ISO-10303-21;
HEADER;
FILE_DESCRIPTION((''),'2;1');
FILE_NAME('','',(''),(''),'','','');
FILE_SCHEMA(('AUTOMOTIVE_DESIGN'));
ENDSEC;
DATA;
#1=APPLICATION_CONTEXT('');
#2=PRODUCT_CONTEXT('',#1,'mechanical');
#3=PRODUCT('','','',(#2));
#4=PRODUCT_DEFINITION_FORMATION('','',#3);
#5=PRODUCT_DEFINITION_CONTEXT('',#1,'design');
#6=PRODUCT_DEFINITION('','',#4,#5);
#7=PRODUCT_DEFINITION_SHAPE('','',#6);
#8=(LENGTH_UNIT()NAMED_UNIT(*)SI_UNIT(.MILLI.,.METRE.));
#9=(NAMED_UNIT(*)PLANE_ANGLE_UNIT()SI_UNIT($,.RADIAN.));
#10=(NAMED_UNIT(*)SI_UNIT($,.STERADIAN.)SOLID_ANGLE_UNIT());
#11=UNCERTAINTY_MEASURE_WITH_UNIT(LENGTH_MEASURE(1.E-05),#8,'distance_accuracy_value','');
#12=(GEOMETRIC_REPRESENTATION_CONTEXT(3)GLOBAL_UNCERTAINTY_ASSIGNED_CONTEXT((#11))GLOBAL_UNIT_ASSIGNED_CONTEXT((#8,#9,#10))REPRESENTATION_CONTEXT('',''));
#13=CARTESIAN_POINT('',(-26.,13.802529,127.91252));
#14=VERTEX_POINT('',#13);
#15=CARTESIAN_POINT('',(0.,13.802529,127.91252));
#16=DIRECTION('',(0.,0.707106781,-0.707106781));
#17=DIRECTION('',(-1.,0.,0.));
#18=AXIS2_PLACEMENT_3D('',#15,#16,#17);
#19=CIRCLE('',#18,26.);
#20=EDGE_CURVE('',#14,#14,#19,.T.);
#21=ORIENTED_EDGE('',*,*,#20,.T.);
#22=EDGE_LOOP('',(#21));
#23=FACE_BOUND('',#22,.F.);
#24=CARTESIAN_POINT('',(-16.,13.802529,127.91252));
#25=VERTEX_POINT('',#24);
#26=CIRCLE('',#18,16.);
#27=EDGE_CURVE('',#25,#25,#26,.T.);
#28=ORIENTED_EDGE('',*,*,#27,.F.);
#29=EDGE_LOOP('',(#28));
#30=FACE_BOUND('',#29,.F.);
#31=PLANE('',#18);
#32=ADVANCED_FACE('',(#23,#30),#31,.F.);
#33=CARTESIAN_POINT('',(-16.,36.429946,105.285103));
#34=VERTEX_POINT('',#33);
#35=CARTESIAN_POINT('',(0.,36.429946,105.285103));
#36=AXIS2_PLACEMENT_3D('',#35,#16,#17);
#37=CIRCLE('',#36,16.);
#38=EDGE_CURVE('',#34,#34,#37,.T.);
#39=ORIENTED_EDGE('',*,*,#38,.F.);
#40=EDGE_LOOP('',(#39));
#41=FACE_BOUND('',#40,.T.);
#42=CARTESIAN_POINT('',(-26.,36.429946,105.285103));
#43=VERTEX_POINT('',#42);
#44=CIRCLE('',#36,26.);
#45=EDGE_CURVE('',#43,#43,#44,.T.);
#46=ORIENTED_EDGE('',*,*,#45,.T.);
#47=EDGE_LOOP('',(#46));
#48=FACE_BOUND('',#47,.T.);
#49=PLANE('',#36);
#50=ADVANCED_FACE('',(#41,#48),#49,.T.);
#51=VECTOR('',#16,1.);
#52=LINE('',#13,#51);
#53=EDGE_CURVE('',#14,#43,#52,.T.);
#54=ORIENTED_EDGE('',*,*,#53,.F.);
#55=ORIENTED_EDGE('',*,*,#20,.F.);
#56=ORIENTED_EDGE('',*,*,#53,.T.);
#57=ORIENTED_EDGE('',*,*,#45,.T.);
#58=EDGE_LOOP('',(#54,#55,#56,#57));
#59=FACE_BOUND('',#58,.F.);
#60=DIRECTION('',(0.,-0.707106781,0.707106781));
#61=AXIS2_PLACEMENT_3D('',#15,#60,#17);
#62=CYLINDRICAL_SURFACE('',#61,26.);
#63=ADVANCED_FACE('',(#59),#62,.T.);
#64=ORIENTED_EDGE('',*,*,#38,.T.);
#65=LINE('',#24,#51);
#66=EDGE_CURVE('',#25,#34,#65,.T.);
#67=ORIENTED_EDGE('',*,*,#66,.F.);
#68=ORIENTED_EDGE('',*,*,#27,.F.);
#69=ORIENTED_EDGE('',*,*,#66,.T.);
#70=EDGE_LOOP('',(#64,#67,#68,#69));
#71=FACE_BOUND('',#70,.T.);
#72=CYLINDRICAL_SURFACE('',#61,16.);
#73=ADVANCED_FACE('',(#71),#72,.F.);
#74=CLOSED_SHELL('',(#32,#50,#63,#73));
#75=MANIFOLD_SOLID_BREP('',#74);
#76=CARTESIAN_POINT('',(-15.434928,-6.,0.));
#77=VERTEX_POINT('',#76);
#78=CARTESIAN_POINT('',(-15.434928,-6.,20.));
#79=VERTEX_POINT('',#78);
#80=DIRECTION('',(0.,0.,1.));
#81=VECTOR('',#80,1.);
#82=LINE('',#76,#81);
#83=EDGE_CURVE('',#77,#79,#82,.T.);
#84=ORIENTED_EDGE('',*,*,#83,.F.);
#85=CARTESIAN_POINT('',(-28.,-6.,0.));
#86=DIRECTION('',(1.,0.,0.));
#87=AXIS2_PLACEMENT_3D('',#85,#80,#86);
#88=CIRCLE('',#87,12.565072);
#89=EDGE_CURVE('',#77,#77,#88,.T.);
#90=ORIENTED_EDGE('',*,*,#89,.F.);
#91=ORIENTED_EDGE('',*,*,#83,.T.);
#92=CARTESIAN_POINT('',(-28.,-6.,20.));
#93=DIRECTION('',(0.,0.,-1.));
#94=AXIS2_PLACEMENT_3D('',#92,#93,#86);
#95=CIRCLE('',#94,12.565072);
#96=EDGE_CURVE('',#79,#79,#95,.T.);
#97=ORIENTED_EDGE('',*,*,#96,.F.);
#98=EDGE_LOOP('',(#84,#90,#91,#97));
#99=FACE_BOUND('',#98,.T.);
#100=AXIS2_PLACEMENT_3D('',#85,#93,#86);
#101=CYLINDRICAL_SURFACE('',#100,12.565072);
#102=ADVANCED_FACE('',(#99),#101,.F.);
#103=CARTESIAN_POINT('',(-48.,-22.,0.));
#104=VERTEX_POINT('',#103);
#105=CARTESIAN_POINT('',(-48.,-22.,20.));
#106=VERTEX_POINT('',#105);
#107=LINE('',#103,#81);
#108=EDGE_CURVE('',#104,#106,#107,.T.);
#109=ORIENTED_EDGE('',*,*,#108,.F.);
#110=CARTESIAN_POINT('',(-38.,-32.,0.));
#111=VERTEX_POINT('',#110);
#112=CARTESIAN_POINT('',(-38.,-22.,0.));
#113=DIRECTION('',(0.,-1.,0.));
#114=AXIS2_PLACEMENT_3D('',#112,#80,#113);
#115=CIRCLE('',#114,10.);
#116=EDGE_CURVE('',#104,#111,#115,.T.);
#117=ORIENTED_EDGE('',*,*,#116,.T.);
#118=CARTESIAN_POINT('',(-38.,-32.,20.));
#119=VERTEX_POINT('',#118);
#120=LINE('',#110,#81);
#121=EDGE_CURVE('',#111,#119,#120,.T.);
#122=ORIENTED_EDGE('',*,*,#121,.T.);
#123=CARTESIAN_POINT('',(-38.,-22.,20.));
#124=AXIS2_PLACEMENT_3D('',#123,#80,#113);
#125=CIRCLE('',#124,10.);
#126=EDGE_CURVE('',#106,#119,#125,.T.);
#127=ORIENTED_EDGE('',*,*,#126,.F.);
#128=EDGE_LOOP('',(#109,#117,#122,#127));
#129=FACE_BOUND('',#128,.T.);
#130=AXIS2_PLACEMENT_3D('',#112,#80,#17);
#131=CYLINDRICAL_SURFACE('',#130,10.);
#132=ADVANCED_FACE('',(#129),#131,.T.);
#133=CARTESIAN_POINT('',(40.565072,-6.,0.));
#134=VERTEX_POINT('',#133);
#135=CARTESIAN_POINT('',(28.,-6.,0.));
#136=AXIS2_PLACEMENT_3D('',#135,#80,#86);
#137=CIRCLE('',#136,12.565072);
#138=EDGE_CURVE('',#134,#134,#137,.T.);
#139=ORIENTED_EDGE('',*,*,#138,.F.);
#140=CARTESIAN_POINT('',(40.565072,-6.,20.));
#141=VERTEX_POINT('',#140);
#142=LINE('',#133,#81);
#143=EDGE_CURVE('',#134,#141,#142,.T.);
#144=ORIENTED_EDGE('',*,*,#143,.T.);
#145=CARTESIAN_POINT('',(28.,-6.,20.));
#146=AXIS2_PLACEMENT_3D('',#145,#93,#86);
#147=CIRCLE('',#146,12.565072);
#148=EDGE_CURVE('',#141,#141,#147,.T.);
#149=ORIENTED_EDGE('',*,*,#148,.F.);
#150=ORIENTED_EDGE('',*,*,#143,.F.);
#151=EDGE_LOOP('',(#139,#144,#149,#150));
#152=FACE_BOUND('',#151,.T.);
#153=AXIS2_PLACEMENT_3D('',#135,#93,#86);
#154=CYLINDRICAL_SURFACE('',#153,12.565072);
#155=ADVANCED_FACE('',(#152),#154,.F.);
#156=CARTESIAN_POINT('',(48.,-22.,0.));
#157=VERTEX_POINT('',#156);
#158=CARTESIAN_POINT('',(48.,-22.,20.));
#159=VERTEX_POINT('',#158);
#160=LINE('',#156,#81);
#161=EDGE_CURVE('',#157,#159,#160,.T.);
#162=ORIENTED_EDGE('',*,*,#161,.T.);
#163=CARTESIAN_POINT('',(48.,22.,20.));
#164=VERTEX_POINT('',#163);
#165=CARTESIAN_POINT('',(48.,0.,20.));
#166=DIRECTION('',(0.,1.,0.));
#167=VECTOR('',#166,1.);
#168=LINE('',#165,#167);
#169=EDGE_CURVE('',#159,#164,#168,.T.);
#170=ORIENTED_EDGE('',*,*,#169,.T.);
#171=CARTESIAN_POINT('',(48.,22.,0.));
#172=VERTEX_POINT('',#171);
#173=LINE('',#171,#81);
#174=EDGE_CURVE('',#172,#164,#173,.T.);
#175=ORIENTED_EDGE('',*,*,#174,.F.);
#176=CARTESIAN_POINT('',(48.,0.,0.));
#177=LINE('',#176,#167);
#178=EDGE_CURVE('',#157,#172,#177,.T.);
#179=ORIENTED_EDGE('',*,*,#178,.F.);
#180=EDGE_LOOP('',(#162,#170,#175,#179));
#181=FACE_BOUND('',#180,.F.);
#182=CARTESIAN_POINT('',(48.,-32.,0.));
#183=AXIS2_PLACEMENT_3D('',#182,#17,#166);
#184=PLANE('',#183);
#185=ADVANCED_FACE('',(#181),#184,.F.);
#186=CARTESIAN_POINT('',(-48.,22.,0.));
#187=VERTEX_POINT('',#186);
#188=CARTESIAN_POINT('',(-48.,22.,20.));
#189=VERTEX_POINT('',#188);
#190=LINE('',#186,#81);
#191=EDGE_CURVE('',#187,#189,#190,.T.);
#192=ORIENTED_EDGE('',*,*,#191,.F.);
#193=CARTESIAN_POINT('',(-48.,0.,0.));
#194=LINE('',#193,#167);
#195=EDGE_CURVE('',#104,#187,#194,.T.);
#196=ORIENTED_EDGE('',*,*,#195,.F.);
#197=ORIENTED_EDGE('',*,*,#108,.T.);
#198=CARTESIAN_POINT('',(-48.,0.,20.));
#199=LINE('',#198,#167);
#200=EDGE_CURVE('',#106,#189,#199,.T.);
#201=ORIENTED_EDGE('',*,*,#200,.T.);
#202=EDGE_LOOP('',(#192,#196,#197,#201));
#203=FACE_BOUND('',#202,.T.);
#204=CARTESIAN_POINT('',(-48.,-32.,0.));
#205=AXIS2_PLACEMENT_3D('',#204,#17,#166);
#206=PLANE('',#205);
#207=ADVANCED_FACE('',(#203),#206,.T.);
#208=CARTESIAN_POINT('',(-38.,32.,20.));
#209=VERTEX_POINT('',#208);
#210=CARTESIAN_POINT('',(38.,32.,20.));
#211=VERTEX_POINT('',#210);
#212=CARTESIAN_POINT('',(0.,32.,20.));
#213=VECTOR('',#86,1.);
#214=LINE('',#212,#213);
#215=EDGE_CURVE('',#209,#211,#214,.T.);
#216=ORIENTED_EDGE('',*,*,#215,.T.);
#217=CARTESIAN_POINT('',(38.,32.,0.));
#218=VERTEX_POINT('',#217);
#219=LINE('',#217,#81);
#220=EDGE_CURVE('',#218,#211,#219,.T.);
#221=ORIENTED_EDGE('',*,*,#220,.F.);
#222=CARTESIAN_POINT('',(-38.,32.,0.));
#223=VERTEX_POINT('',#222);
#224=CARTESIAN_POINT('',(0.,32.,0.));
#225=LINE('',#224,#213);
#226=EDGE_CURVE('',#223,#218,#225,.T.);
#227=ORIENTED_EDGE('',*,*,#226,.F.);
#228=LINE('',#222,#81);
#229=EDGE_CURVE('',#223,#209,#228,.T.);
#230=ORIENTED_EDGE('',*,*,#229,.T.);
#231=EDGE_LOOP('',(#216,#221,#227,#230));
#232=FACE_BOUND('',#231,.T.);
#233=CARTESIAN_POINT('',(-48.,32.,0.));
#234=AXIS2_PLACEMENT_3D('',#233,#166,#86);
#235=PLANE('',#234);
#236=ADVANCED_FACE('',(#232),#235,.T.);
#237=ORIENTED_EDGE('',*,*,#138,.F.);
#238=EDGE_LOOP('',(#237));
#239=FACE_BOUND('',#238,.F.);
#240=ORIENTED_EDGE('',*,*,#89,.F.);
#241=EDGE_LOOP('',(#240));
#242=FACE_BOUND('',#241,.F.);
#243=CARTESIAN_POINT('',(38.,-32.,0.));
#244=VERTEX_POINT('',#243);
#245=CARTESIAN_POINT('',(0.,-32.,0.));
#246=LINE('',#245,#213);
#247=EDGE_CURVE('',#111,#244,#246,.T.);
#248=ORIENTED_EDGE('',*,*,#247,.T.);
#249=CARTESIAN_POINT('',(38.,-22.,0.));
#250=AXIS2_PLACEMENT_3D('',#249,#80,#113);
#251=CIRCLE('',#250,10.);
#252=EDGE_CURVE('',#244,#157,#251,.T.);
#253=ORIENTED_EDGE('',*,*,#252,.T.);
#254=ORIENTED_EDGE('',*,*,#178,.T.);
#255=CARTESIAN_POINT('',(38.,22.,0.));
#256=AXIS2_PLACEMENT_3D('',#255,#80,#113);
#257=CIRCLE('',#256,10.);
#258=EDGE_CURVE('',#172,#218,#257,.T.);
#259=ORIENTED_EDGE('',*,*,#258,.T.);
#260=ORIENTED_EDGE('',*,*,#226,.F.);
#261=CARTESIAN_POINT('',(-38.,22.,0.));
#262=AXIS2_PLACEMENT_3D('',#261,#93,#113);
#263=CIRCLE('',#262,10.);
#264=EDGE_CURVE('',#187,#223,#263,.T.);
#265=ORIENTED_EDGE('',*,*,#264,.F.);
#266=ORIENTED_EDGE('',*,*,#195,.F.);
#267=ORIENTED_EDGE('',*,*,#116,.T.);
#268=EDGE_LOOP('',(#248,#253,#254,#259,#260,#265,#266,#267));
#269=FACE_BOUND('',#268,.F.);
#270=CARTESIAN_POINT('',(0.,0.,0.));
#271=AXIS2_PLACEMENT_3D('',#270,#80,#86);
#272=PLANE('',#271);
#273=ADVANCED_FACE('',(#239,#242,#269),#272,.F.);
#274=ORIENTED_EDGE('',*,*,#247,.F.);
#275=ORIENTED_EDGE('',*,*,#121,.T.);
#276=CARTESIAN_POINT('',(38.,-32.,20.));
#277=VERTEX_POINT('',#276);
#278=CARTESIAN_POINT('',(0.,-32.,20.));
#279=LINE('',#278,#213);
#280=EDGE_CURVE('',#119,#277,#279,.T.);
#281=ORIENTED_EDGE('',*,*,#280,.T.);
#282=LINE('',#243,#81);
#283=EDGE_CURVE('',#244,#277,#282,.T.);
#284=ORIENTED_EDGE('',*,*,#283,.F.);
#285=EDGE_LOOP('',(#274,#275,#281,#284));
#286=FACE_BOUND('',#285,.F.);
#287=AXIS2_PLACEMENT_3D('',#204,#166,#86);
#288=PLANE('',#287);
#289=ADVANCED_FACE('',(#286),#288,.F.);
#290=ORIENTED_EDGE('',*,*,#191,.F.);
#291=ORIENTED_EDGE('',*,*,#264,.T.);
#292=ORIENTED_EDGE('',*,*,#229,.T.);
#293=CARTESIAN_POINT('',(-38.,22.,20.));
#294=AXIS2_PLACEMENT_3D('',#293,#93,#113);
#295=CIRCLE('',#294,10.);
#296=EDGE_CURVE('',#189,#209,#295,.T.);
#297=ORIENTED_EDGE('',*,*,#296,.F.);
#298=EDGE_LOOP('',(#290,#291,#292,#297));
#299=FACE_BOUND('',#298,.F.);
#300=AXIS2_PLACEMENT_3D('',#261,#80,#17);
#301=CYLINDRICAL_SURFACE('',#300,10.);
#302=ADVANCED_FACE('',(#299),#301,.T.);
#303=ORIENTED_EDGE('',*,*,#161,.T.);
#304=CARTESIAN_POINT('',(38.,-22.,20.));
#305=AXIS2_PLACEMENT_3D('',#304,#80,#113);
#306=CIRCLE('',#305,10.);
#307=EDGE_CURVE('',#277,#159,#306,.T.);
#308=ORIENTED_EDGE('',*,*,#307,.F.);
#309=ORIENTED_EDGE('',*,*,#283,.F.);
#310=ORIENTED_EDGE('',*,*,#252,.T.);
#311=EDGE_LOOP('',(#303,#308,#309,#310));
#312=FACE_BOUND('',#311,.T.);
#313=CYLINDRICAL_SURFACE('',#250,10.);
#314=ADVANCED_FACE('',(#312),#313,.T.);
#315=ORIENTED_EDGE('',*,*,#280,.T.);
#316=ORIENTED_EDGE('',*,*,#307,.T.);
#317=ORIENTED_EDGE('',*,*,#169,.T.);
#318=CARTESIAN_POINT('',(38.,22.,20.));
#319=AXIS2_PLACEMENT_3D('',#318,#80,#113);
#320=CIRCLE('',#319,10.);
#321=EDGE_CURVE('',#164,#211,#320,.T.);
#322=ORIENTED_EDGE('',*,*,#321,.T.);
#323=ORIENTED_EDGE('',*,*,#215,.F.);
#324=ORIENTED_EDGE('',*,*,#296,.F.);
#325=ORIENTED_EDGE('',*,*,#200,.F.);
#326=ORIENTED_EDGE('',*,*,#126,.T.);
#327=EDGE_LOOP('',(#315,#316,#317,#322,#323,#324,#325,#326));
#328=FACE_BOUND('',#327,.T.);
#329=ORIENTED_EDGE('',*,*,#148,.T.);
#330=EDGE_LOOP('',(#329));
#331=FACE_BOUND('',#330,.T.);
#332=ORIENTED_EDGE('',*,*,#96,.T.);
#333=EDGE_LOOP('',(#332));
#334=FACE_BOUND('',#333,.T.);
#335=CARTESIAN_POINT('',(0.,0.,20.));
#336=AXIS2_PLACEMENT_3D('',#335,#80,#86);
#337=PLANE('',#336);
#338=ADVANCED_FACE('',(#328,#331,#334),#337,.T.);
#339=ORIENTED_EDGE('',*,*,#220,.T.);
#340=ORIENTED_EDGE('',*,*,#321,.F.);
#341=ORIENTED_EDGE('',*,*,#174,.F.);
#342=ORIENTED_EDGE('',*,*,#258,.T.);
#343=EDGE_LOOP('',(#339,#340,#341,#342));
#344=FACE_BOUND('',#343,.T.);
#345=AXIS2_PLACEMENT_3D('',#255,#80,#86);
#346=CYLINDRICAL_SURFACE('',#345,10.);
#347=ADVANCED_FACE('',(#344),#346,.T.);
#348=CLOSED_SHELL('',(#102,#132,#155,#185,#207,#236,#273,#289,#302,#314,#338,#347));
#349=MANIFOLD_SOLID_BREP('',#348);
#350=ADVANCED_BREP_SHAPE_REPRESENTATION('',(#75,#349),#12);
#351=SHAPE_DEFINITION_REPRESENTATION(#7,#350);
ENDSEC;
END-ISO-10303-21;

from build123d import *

# Parameters (mm, degrees)
F0_W     = 96
F0_H     = 64
F1_DEPTH = 20
F2_R     = 10
F3_R     = 12.5650724874
F4_DEPTH = 25
F8_R     = 26
F8_R_2   = 16
F9_DEPTH = 32


with BuildPart() as f1:
    # F0 (on Top) → F1 (new body)
    with BuildSketch(Plane.XY):
        Rectangle(F0_W, F0_H)
    extrude(amount=F1_DEPTH)

    # F2
    f2_edges = [f1.edges().sort_by_distance(p)[0] for p in [
        (-48, -32, 10),
        (48, -32, 10),
        (48, 32, 10),
        (-48, 32, 10),
    ]]
    fillet(f2_edges, radius=F2_R)

    # F3 (on Top) → F4 (cut)
    with BuildSketch(Plane.XY):
        with Locations((28, -6)):
            Circle(F3_R)
        with Locations((-28, -6)):
            Circle(F3_R)
    extrude(amount=F4_DEPTH, mode=Mode.SUBTRACT)


with BuildPart() as f9:
    # F8 (on offset) → F9 (new body)
    with BuildSketch(Plane(origin=(0, -57.0549957007, 57.0549957007), x_dir=(-1, 0, 0), z_dir=(0, 0.7071067812, -0.7071067812))):
        with Locations((0, 100.2076724347)):
            Circle(F8_R)
        with Locations((0, 100.2076724347)):
            Circle(F8_R_2, mode=Mode.SUBTRACT)
    extrude(amount=F9_DEPTH)


solid = Compound([f1.part, f9.part])
